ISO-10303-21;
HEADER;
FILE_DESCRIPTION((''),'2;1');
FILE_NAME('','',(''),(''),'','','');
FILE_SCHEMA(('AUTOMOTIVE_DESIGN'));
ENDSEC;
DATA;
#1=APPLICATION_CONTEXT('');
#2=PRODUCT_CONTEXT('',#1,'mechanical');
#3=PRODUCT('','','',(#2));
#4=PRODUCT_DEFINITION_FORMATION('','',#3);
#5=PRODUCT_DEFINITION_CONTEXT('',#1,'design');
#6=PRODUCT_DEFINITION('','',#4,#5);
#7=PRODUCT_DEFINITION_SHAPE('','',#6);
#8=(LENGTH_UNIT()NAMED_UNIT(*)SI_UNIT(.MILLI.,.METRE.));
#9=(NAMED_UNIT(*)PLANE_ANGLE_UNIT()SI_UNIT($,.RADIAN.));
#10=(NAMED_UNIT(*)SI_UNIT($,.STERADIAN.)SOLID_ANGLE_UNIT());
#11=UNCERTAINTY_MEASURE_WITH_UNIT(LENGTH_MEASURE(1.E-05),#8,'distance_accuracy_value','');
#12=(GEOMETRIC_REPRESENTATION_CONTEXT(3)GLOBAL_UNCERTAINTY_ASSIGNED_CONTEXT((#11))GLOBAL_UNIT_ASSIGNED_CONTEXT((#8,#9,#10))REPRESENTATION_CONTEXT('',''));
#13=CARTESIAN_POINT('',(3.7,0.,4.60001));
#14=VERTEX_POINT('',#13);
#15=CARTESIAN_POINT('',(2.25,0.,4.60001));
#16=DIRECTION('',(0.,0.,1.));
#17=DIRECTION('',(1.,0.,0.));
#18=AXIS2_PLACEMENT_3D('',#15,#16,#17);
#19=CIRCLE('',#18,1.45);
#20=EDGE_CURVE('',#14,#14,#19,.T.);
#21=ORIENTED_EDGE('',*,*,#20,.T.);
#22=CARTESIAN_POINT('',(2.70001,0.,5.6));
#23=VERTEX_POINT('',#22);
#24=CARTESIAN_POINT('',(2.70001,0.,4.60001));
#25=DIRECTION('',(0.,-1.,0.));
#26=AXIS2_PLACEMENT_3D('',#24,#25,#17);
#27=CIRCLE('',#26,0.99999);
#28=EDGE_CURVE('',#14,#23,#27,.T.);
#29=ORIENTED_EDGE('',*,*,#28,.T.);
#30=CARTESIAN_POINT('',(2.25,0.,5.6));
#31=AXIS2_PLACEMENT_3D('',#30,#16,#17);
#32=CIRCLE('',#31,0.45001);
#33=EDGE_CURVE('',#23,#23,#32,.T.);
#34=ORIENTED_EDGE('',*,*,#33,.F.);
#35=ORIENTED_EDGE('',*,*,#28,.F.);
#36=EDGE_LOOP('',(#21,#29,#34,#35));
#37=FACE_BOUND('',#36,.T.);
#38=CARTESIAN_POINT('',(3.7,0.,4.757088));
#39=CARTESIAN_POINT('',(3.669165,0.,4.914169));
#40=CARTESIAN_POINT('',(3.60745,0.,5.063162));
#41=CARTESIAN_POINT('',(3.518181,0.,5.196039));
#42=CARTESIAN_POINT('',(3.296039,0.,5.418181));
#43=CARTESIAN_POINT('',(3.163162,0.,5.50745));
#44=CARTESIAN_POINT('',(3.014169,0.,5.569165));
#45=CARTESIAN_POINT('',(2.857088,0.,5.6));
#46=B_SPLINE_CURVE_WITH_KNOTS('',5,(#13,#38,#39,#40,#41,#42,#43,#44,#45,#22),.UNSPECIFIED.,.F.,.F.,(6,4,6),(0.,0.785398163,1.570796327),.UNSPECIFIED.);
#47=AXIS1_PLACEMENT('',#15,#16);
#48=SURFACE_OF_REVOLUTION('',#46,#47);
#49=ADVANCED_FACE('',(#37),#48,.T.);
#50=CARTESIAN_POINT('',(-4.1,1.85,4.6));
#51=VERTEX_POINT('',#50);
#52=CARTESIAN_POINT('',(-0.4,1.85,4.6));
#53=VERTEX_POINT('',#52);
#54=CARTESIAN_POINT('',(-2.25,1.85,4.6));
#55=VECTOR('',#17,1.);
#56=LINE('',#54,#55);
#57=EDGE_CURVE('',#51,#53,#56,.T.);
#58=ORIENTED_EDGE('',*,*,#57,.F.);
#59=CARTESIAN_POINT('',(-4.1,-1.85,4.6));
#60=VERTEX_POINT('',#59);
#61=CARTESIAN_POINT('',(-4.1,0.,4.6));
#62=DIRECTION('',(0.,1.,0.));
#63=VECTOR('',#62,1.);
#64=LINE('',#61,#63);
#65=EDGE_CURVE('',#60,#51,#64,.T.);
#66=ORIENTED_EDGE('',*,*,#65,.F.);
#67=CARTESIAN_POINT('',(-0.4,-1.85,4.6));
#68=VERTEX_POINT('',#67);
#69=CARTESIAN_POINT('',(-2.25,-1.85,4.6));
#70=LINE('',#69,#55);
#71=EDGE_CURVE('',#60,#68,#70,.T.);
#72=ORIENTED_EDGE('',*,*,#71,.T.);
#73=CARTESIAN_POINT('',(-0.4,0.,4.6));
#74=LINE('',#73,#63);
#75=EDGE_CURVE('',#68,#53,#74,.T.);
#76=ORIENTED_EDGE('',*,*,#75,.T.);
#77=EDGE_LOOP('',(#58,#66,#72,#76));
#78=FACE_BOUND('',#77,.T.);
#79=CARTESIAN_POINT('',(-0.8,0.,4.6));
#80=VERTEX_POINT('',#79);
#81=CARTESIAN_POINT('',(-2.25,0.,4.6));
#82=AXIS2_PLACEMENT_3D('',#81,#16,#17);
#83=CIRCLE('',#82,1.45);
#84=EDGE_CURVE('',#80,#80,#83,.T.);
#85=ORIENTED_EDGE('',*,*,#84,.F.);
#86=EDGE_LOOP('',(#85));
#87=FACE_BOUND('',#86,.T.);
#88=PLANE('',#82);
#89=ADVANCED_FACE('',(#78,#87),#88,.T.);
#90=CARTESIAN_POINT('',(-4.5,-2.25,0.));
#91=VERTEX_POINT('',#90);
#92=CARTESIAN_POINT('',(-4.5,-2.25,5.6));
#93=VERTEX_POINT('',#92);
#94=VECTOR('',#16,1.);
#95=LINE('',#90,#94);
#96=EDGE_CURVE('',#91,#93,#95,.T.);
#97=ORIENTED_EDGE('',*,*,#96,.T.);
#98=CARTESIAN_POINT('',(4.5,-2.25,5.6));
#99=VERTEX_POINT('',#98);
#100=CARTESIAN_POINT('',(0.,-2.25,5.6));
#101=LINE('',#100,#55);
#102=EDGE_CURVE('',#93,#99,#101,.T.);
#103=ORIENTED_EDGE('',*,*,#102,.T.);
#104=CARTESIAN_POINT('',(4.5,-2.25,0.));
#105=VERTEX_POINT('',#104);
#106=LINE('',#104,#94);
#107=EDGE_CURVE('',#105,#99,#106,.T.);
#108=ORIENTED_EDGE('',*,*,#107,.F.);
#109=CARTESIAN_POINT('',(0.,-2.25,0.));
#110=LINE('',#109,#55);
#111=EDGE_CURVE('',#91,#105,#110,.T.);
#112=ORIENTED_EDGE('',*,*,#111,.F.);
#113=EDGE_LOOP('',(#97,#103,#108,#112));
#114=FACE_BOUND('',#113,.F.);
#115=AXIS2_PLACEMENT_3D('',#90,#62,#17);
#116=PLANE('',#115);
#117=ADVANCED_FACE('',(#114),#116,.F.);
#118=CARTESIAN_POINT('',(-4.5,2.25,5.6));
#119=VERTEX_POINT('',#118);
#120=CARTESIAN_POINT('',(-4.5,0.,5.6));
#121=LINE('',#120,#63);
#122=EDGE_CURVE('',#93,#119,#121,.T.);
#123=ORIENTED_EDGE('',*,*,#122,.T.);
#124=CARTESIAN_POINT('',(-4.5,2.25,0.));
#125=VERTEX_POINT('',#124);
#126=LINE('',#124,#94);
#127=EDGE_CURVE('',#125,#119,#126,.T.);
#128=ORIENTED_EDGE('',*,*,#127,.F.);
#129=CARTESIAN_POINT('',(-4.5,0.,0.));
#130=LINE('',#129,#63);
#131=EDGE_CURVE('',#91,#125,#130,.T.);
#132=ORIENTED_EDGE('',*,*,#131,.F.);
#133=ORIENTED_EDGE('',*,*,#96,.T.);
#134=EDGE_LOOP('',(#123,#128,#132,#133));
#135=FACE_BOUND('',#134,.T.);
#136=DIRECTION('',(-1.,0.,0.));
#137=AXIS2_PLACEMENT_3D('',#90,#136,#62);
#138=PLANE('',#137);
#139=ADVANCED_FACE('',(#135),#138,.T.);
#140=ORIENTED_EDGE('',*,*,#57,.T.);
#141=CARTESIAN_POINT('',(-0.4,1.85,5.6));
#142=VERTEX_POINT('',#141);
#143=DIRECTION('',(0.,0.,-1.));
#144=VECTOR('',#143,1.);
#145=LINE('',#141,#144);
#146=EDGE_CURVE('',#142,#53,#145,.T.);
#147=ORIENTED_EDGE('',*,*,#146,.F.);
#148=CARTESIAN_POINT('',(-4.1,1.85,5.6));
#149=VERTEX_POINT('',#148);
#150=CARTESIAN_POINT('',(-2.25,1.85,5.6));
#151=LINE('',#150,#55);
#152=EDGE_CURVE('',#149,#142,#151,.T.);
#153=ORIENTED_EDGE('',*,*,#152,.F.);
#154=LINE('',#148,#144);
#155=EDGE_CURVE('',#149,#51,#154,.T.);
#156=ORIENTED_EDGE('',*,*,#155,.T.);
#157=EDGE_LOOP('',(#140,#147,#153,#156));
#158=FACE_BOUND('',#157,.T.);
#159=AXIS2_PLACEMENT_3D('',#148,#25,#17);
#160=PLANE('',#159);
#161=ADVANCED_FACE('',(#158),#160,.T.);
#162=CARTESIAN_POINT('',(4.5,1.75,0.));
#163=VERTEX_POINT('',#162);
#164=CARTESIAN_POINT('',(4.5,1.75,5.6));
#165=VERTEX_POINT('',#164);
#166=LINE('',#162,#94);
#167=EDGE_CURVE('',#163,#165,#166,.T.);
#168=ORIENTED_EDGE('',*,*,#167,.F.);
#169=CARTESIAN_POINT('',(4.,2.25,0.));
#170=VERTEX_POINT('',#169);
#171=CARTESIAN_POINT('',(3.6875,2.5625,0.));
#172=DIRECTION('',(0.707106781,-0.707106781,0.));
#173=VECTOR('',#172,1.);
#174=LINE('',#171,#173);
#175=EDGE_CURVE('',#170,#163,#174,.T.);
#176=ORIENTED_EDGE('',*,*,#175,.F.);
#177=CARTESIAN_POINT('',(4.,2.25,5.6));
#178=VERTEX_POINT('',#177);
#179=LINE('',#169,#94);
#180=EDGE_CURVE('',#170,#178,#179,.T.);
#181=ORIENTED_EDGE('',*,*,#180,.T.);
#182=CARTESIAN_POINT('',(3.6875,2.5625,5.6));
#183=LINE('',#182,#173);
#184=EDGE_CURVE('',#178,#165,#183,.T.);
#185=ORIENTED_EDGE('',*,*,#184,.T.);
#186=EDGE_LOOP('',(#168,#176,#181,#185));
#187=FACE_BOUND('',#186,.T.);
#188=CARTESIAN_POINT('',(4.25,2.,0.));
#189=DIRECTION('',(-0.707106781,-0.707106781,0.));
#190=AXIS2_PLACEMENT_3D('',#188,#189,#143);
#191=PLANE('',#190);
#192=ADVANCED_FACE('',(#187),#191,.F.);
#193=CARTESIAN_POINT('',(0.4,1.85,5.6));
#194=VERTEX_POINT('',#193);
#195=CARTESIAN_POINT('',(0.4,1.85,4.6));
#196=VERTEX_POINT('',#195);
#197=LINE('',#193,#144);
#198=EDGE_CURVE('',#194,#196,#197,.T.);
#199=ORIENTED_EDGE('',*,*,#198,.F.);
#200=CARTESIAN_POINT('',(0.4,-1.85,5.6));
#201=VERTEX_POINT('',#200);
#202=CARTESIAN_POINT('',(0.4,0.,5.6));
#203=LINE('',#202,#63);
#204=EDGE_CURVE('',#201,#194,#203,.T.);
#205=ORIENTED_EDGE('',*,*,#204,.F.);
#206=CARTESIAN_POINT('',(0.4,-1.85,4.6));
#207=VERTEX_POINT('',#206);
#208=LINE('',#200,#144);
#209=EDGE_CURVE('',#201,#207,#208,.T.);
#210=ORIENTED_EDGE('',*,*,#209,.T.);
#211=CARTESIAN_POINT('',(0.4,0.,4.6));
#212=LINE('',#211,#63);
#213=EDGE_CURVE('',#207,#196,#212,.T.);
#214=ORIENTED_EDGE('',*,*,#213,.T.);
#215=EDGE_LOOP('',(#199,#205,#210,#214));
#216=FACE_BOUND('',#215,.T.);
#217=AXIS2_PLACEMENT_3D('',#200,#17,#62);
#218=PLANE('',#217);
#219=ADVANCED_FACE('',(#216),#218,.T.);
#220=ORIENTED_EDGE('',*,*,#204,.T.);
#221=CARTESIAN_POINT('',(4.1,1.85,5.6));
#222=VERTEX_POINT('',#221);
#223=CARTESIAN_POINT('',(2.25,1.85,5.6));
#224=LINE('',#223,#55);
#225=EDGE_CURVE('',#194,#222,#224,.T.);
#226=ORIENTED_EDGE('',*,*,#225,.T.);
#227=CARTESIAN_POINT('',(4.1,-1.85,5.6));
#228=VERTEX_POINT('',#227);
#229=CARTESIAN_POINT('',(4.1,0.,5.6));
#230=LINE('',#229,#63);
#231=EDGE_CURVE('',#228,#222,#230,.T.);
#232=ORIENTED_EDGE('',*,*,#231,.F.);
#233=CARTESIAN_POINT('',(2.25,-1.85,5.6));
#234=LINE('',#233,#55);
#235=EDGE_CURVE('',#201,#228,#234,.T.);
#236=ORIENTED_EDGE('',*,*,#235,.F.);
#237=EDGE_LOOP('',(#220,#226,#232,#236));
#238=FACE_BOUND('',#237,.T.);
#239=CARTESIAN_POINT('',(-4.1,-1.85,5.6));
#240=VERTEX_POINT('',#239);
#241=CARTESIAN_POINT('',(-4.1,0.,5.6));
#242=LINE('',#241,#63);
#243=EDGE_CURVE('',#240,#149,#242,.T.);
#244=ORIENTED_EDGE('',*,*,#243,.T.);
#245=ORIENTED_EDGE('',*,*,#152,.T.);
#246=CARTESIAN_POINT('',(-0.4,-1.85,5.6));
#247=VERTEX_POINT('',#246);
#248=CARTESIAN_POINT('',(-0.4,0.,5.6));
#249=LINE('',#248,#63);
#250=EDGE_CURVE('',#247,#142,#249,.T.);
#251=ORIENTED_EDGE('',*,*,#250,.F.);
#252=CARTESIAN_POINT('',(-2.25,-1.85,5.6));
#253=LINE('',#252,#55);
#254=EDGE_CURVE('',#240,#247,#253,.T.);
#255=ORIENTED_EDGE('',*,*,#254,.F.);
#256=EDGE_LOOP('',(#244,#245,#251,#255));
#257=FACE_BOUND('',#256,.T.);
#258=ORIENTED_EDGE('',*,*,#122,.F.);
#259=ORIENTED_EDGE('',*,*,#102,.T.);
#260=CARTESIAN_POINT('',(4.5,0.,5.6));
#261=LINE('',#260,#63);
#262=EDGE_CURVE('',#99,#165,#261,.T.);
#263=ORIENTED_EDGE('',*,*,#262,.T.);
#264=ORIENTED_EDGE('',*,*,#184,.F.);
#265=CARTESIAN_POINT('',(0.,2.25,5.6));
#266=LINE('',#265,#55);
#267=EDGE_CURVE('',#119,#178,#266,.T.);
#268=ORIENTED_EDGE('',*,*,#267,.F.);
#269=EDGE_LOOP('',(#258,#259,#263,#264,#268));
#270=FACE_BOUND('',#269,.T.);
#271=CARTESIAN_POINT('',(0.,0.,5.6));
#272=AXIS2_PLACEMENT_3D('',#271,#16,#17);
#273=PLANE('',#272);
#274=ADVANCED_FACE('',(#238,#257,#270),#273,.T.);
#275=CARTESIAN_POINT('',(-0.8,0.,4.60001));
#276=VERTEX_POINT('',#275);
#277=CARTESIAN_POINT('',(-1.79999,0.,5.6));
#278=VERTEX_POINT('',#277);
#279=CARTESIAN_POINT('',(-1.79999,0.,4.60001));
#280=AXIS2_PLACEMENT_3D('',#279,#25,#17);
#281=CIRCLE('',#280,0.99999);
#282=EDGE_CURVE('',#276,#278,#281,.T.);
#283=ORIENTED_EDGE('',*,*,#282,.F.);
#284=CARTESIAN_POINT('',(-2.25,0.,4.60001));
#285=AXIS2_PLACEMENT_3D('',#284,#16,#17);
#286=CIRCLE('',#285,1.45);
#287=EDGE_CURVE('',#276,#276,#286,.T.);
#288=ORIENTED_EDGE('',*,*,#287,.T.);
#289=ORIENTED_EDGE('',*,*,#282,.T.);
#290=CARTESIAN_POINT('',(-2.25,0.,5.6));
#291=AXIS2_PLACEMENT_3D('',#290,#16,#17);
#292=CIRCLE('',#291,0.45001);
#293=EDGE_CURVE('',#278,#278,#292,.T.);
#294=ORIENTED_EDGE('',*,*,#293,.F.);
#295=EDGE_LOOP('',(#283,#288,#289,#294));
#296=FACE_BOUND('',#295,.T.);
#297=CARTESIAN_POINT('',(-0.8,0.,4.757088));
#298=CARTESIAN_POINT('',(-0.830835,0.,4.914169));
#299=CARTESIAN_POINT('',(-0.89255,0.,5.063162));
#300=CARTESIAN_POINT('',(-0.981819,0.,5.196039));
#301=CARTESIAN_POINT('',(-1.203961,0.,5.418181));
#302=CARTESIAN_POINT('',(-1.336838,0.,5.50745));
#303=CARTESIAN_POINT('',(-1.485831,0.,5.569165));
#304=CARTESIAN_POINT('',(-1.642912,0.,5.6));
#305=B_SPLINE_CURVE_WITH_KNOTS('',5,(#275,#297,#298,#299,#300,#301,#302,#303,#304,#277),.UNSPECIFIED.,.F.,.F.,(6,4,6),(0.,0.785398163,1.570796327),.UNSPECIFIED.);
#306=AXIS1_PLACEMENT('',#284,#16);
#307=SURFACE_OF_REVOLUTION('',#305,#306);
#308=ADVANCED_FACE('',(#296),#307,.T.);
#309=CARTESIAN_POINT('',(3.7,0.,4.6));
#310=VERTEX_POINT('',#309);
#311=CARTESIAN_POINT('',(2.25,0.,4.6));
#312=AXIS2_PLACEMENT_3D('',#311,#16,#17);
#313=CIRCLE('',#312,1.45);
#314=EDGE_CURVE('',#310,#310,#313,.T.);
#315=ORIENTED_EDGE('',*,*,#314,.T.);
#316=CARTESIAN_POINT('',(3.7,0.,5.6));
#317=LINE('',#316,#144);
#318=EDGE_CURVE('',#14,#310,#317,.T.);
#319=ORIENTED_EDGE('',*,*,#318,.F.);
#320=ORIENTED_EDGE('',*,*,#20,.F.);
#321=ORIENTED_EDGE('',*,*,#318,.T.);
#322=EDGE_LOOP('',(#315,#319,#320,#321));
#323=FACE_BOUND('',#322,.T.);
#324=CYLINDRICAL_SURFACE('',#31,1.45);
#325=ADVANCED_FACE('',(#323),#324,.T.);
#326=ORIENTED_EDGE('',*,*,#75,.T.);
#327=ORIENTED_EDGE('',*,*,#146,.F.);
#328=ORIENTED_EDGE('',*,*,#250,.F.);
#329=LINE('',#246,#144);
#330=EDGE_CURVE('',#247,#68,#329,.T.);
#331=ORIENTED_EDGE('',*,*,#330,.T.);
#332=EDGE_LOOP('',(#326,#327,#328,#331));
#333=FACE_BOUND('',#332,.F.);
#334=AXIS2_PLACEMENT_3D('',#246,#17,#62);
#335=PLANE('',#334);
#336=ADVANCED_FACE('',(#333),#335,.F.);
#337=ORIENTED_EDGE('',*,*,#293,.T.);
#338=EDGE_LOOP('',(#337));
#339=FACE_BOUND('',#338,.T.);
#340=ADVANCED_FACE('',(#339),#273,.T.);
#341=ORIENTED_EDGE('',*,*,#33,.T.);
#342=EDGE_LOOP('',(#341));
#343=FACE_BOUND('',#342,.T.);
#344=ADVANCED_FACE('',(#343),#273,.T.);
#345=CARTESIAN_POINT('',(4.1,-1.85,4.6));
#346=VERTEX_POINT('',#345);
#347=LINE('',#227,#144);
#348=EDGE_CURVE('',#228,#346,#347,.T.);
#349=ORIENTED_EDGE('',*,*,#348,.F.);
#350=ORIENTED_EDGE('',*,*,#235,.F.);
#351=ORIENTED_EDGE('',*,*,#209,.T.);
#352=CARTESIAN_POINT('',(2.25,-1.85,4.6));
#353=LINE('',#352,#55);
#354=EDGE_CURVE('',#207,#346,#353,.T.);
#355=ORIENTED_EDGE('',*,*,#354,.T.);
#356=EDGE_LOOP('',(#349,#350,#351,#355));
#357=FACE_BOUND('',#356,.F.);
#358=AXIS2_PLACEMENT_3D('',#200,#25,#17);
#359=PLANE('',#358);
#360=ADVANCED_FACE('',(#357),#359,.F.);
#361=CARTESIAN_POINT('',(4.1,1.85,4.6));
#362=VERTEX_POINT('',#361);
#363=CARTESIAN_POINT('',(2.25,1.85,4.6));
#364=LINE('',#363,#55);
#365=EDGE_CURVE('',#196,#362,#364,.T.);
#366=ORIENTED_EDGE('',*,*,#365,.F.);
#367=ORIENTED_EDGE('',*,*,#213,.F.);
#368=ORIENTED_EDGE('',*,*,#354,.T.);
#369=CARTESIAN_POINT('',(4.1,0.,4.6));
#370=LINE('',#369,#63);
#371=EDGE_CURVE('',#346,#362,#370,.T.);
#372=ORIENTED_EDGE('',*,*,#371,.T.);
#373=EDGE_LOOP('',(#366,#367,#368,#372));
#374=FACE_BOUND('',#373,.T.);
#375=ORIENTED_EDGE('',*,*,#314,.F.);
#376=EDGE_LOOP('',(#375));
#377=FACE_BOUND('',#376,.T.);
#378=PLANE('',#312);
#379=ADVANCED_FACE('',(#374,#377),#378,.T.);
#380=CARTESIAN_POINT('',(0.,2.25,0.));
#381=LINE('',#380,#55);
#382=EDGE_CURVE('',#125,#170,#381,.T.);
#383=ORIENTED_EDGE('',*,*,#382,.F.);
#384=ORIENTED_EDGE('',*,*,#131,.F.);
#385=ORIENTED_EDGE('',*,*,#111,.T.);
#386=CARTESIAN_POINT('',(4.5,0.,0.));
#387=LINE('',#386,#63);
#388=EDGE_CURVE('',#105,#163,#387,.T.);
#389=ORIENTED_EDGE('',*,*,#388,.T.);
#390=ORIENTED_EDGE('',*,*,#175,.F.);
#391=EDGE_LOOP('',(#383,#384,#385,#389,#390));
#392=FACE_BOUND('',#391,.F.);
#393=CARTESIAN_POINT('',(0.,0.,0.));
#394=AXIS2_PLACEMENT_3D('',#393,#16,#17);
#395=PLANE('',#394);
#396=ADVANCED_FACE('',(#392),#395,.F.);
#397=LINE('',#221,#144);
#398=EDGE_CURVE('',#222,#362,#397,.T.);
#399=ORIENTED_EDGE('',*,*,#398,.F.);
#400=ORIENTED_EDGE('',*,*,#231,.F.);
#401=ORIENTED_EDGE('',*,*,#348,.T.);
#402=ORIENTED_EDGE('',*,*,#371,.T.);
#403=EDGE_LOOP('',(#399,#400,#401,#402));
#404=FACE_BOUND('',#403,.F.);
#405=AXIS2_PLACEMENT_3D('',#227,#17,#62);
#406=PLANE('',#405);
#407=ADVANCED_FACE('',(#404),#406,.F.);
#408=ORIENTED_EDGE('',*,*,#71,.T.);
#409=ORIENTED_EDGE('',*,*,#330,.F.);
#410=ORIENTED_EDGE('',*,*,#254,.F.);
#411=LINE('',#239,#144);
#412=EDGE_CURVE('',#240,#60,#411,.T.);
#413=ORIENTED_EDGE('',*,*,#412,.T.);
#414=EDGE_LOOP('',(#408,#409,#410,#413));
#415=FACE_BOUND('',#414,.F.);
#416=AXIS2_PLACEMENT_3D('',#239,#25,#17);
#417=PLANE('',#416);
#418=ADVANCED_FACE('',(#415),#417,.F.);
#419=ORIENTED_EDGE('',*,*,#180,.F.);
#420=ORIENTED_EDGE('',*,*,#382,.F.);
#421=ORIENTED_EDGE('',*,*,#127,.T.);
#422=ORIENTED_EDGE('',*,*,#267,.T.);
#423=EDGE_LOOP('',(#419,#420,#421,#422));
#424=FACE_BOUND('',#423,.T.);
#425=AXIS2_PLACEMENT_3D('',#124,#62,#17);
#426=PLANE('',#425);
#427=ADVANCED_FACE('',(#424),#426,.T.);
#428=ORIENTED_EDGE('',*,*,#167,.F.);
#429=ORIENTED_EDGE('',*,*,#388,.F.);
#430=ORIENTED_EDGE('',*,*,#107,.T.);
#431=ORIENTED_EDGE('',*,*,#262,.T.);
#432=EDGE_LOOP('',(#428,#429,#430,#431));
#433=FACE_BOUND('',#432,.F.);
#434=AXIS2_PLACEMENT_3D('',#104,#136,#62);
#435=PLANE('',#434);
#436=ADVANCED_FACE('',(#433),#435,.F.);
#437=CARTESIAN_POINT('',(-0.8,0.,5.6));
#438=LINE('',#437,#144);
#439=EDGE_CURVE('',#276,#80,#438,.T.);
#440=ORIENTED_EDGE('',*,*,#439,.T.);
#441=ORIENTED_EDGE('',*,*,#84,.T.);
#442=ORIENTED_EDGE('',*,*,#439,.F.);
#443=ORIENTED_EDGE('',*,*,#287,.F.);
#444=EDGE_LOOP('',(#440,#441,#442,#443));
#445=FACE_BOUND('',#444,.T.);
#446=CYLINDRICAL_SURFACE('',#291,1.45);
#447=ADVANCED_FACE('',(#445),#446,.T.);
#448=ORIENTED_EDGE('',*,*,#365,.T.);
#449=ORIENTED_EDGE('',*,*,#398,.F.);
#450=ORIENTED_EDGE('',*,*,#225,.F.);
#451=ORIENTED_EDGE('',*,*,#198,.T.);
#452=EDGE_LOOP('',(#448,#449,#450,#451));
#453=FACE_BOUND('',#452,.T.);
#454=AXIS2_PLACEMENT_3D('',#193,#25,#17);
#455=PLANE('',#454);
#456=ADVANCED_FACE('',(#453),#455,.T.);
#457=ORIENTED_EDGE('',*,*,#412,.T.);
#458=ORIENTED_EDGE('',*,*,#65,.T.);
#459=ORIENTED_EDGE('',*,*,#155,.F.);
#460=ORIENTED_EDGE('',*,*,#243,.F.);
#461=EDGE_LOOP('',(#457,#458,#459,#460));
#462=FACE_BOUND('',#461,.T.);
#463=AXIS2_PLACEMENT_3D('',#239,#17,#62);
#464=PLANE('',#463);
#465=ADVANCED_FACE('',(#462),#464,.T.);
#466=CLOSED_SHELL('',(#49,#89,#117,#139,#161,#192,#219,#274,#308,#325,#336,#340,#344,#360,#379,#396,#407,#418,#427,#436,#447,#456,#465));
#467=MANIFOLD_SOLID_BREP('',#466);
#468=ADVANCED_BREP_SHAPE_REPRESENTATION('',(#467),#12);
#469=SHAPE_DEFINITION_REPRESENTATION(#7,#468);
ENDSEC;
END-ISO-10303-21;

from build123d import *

# Parameters (mm, degrees)
F0_W     = 9
F0_H     = 4.5
F1_DEPTH = 5.6
F2_W     = 3.7
F2_H     = 3.7
F2_R     = 1.45
F3_DEPTH = 1
F4_R     = 0.99999
F5_SIZE  = 0.5


# Not quite as in the source:
# - a fillet or chamfer is up to 0.001 mm smaller than in the source, because OpenCascade refuses the exact size


with BuildPart() as f1:
    # F0 (on Top) → F1 (new body)
    with BuildSketch(Plane.XY):
        Rectangle(F0_W, F0_H)
    extrude(amount=F1_DEPTH)

    # F2 (on face) → F3 (cut)
    with BuildSketch(Plane.XY.offset(5.6)):
        with Locations((-2.25, 0)):
            Rectangle(F2_W, F2_H)
        with Locations((-2.25, 0)):
            Circle(F2_R, mode=Mode.SUBTRACT)
        with Locations((2.25, 0)):
            Rectangle(F2_W, F2_H)
        with Locations((2.25, 0)):
            Circle(F2_R, mode=Mode.SUBTRACT)
    extrude(amount=-F3_DEPTH, mode=Mode.SUBTRACT)

    # F4 (radius 1 in the source; OpenCascade refuses exactly that, so slightly less here)
    f4_edges = [f1.edges().sort_by_distance(p)[0] for p in [
        (-3.7, 0, 5.6),
        (0.8, 0, 5.6),
    ]]
    fillet(f4_edges, radius=F4_R)

    # F5
    f5_edges = [f1.edges().sort_by_distance(p)[0] for p in [
        (4.5, 2.25, 2.8),
    ]]
    chamfer(f5_edges, length=F5_SIZE)


solid = f1.part
